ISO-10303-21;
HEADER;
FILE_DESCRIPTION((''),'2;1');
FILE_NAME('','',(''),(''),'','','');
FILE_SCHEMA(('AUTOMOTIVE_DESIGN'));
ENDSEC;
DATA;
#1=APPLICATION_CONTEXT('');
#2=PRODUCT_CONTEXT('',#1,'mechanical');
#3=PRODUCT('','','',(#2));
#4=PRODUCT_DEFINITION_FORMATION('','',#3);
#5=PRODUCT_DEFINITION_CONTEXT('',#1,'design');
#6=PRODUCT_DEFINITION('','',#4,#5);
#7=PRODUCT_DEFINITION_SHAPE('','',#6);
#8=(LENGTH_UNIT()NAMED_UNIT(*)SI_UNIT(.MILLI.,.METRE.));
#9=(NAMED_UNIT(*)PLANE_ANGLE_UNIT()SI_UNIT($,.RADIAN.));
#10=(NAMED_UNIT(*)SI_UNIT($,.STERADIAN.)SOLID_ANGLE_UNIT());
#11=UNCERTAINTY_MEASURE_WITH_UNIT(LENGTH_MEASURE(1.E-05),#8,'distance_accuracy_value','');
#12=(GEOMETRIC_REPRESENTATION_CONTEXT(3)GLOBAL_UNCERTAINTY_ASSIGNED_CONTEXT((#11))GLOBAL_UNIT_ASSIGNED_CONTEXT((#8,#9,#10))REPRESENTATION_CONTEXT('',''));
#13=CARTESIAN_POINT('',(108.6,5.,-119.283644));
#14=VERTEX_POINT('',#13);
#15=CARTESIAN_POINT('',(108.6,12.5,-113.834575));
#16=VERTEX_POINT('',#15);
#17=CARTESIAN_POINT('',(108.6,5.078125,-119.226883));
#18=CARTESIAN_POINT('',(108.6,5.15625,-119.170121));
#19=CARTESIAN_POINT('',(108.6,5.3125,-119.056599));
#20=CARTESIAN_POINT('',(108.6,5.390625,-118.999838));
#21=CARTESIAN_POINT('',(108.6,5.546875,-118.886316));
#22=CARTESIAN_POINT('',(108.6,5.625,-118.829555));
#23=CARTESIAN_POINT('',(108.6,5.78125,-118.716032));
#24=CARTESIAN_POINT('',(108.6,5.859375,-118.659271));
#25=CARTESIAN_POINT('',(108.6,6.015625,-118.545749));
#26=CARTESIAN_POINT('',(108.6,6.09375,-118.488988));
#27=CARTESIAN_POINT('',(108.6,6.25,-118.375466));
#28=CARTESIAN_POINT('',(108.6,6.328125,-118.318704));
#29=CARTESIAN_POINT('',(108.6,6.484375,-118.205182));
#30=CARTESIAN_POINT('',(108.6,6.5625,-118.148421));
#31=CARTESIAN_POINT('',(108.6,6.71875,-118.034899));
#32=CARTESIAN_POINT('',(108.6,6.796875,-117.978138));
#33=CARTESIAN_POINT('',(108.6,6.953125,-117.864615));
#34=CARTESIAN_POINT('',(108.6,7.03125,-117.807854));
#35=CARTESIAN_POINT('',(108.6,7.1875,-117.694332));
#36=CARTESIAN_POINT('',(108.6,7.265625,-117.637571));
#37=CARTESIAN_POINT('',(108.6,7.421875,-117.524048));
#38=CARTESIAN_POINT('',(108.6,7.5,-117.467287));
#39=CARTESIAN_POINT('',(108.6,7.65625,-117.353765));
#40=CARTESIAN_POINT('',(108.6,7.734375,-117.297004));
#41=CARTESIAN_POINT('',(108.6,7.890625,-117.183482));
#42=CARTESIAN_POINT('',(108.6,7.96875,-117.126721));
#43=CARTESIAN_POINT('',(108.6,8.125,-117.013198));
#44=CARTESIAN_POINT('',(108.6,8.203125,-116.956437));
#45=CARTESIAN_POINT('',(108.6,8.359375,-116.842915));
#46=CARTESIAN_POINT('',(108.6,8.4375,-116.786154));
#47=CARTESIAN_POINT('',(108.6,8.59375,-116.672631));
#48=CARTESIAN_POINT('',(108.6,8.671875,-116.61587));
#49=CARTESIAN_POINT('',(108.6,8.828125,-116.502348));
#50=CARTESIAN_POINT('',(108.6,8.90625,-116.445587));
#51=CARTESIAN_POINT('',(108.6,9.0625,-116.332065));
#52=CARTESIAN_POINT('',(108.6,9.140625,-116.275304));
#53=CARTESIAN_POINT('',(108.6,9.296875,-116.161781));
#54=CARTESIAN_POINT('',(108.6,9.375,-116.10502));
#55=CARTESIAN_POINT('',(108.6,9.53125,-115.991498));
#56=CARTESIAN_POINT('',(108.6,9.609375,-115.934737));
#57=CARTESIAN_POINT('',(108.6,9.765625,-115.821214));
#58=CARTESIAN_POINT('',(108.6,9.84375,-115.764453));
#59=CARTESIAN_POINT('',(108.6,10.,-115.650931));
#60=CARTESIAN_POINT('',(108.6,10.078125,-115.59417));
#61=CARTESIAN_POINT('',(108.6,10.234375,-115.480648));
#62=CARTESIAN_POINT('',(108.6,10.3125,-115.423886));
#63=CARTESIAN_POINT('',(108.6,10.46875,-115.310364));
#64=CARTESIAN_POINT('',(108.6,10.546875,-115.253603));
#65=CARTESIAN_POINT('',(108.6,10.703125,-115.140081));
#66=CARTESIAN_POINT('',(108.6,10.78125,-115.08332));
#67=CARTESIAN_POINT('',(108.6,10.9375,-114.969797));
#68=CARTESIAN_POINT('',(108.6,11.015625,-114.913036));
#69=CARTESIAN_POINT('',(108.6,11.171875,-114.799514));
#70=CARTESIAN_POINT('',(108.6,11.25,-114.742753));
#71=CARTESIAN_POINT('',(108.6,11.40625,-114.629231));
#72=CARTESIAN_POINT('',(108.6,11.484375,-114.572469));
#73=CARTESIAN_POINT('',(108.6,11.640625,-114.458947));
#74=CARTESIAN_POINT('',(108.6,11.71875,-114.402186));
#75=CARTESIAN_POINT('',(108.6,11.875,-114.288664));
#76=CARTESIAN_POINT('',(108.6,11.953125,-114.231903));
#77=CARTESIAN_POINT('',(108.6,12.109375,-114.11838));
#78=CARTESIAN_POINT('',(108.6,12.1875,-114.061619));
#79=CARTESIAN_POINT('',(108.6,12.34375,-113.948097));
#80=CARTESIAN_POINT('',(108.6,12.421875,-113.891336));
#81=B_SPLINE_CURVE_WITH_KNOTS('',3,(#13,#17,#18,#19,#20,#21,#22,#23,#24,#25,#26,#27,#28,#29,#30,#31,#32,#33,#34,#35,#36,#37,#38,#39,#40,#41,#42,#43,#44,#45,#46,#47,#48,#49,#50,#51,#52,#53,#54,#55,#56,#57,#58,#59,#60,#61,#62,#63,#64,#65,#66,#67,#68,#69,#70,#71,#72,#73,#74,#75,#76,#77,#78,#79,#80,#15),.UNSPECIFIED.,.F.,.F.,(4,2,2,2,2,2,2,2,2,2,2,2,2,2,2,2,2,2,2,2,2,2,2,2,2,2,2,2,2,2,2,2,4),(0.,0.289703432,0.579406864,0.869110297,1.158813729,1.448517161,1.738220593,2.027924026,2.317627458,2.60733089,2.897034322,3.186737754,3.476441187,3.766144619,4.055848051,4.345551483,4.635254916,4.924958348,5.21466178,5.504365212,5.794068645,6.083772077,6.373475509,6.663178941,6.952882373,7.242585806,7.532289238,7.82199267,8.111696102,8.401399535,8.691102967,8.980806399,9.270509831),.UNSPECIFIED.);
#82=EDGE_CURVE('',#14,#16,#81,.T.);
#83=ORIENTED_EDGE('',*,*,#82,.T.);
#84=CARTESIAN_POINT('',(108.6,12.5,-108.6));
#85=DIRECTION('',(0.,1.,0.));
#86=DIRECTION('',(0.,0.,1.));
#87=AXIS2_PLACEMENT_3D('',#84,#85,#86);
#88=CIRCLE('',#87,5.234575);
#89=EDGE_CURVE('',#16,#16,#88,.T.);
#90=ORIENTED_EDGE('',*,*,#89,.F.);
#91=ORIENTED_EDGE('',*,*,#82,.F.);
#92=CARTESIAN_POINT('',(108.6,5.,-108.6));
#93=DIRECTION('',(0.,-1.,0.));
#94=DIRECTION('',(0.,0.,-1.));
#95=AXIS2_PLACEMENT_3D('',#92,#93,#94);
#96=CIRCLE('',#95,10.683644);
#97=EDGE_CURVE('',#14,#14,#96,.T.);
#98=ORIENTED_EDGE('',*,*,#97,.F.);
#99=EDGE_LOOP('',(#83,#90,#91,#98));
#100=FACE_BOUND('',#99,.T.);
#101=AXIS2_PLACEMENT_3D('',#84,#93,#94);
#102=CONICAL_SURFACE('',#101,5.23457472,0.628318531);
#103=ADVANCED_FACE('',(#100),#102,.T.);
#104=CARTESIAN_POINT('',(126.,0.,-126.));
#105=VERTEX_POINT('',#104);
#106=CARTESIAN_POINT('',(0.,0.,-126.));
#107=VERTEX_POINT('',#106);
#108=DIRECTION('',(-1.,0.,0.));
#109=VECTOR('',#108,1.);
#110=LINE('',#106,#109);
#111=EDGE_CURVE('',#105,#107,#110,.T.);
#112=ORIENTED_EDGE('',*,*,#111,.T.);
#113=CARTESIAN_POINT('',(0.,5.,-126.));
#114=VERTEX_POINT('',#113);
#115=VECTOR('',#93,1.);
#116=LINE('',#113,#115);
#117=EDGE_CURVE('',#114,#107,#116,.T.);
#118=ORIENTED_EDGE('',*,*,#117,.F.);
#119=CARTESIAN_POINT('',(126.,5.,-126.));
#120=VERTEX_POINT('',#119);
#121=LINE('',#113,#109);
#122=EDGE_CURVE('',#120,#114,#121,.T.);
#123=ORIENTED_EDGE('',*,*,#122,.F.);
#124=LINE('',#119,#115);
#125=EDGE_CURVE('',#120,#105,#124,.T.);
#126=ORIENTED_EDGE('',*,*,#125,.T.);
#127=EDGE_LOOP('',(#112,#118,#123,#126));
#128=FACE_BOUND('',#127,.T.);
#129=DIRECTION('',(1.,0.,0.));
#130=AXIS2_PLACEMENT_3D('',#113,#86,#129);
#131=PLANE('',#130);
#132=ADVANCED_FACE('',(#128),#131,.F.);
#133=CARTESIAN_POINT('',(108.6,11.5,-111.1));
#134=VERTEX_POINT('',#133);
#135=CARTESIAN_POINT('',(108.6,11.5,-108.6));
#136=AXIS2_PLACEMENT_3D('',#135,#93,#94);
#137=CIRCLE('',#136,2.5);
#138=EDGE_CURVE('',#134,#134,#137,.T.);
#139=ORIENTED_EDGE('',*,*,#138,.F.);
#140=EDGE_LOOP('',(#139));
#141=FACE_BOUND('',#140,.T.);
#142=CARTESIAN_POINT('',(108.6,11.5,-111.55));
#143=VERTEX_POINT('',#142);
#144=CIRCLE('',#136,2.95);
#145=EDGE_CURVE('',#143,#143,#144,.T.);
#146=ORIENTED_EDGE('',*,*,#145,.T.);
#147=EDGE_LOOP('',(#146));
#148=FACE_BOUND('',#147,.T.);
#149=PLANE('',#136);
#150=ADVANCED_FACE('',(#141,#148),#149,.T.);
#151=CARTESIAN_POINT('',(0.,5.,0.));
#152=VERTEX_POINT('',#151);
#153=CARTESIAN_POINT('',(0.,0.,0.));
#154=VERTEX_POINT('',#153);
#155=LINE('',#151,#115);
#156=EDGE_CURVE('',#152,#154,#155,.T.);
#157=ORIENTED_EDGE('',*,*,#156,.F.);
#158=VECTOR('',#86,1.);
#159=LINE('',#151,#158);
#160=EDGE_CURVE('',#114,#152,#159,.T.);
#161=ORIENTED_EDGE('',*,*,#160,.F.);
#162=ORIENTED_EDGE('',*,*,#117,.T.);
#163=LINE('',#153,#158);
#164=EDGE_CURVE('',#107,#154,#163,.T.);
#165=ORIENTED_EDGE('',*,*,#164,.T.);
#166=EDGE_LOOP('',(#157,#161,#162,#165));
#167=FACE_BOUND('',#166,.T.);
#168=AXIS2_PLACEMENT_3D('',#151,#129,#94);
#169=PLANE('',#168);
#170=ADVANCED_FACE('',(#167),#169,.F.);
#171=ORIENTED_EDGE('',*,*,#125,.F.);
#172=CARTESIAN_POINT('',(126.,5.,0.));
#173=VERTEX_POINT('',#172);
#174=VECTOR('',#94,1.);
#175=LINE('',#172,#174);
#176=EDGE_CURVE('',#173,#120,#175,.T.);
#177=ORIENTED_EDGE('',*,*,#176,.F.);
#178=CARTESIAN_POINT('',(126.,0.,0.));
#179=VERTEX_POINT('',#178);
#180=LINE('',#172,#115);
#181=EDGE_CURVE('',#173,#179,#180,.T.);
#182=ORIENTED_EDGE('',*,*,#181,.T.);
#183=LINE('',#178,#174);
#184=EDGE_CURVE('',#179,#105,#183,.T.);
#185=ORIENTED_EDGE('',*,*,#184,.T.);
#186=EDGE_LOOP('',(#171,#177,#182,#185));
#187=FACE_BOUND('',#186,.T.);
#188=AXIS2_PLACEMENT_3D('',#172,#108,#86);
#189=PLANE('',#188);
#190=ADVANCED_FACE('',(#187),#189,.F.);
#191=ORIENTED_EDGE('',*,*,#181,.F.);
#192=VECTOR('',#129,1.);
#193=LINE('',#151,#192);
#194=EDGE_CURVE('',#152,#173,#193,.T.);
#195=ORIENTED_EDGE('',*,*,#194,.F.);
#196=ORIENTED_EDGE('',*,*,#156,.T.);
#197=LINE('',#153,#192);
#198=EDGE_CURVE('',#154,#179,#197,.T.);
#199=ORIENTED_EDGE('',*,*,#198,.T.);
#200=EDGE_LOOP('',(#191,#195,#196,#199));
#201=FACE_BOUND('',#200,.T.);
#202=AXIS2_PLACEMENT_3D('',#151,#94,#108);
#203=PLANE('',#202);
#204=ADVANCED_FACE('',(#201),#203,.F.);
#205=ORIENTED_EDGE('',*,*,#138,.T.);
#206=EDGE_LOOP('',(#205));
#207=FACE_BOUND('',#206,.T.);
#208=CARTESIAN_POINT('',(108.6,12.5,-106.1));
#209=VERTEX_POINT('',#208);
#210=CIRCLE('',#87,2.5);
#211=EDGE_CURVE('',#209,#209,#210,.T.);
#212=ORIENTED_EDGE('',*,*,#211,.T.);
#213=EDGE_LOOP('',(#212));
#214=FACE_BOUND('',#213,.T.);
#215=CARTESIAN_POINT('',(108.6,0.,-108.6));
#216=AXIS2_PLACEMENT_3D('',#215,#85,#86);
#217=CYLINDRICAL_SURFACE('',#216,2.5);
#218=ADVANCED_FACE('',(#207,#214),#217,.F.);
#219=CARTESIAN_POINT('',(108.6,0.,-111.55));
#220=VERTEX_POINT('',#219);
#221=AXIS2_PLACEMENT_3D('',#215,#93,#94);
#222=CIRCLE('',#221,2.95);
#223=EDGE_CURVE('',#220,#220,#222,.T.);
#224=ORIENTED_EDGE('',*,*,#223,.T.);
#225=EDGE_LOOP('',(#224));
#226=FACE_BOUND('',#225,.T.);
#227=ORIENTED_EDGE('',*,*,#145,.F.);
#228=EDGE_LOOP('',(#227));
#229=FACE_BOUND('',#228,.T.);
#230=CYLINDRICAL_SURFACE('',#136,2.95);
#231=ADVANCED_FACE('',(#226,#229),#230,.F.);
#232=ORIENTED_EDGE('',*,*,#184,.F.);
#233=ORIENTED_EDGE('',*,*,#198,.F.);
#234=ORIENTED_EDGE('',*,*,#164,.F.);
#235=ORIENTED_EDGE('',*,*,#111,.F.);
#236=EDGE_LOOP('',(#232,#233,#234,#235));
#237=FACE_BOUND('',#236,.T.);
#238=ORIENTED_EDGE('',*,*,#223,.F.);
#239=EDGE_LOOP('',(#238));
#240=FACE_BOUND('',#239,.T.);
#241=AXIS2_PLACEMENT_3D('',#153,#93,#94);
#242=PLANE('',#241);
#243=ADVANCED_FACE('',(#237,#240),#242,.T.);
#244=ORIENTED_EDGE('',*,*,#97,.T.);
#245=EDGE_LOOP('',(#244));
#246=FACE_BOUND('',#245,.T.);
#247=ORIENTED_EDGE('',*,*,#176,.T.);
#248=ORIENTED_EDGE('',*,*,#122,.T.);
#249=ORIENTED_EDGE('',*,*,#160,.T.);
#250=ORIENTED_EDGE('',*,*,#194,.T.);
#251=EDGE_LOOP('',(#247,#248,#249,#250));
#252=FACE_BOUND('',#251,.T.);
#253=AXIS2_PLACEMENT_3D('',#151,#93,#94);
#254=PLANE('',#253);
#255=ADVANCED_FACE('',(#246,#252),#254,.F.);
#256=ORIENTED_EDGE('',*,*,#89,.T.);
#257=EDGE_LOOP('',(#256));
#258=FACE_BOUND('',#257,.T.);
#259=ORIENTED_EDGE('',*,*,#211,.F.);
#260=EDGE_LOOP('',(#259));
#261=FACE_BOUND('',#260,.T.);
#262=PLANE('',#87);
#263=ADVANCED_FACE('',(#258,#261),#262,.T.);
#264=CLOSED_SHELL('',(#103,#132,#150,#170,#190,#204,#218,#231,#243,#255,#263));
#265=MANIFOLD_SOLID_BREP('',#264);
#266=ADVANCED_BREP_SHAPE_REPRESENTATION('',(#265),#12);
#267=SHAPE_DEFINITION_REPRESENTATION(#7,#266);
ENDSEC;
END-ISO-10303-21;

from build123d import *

# Parameters (mm, degrees)
SKETCH1_W           = 126
SKETCH1_H           = 126
BOSS_EXTRUDE1_DEPTH = 5
SKETCH3_R           = 12.5
BOSS_EXTRUDE2_DEPTH = 7.5
SKETCH4_R           = 2.95
CUT_EXTRUDE1_DEPTH  = 11.5
SKETCH6_R           = 2.5
CUT_EXTRUDE2_DEPTH  = 179.628805068
CHAMFER1_SIZE       = 10
CHAMFER1_SIZE_2     = 7.26542528


with BuildPart() as part:
    # Sketch1 → Boss-Extrude1 (new body)
    with BuildSketch(Plane(origin=(0, 0, 0), x_dir=(1, 0, 0), z_dir=(0, 1, 0))):
        with Locations((63, 63)):
            Rectangle(SKETCH1_W, SKETCH1_H)
    extrude(amount=BOSS_EXTRUDE1_DEPTH)

    # Sketch3 → Boss-Extrude2 (add)
    with BuildSketch(Plane(origin=(0, 5, 0), x_dir=(1, 0, 0), z_dir=(0, 1, 0))):
        with Locations(Location((108.6, 108.6, 0), (0, 0, 90))):
            Circle(SKETCH3_R)
    extrude(amount=BOSS_EXTRUDE2_DEPTH)

    # Sketch4 → Cut-Extrude1 (cut)
    with BuildSketch(Plane.XZ):
        with Locations(Location((108.6, -108.6, 0), (0, 0, 270))):
            Circle(SKETCH4_R)
    extrude(amount=-CUT_EXTRUDE1_DEPTH, mode=Mode.SUBTRACT)

    # Sketch6 → Cut-Extrude2 (cut, through all)
    with BuildSketch(Plane(origin=(0, 12.5, 0), x_dir=(1, 0, 0), z_dir=(0, 1, 0))):
        with Locations(Location((108.6, 108.6, 0), (0, 0, 270))):
            Circle(SKETCH6_R)
    extrude(amount=-CUT_EXTRUDE2_DEPTH, mode=Mode.SUBTRACT)

    # Chamfer1
    # the kernel refuses this chamfer: 10, 7.26542528 mm, written as the material it takes off along each edge
    with BuildSketch(Plane(origin=(108.6, 12.5, -108.6), x_dir=(0, 0, -1), z_dir=(1, 0, 0))) as chamfer1_piece_1_section:
        Polygon((12.5, -CHAMFER1_SIZE), (12.5 - CHAMFER1_SIZE_2, 0), (12.5, 0), align=None)
    chamfer1_piece_1 = revolve(axis=Axis((108.6, 12.5, -108.6), (0, 1, 0)), mode=Mode.PRIVATE)
    chamfer1_piece_1 = split(chamfer1_piece_1, bisect_by=Plane(origin=(108.6, 5, -100.650989912), z_dir=(0, 1, 0)), keep=Keep.TOP, mode=Mode.PRIVATE)
    add(chamfer1_piece_1, mode=Mode.SUBTRACT)


solid = part.part
